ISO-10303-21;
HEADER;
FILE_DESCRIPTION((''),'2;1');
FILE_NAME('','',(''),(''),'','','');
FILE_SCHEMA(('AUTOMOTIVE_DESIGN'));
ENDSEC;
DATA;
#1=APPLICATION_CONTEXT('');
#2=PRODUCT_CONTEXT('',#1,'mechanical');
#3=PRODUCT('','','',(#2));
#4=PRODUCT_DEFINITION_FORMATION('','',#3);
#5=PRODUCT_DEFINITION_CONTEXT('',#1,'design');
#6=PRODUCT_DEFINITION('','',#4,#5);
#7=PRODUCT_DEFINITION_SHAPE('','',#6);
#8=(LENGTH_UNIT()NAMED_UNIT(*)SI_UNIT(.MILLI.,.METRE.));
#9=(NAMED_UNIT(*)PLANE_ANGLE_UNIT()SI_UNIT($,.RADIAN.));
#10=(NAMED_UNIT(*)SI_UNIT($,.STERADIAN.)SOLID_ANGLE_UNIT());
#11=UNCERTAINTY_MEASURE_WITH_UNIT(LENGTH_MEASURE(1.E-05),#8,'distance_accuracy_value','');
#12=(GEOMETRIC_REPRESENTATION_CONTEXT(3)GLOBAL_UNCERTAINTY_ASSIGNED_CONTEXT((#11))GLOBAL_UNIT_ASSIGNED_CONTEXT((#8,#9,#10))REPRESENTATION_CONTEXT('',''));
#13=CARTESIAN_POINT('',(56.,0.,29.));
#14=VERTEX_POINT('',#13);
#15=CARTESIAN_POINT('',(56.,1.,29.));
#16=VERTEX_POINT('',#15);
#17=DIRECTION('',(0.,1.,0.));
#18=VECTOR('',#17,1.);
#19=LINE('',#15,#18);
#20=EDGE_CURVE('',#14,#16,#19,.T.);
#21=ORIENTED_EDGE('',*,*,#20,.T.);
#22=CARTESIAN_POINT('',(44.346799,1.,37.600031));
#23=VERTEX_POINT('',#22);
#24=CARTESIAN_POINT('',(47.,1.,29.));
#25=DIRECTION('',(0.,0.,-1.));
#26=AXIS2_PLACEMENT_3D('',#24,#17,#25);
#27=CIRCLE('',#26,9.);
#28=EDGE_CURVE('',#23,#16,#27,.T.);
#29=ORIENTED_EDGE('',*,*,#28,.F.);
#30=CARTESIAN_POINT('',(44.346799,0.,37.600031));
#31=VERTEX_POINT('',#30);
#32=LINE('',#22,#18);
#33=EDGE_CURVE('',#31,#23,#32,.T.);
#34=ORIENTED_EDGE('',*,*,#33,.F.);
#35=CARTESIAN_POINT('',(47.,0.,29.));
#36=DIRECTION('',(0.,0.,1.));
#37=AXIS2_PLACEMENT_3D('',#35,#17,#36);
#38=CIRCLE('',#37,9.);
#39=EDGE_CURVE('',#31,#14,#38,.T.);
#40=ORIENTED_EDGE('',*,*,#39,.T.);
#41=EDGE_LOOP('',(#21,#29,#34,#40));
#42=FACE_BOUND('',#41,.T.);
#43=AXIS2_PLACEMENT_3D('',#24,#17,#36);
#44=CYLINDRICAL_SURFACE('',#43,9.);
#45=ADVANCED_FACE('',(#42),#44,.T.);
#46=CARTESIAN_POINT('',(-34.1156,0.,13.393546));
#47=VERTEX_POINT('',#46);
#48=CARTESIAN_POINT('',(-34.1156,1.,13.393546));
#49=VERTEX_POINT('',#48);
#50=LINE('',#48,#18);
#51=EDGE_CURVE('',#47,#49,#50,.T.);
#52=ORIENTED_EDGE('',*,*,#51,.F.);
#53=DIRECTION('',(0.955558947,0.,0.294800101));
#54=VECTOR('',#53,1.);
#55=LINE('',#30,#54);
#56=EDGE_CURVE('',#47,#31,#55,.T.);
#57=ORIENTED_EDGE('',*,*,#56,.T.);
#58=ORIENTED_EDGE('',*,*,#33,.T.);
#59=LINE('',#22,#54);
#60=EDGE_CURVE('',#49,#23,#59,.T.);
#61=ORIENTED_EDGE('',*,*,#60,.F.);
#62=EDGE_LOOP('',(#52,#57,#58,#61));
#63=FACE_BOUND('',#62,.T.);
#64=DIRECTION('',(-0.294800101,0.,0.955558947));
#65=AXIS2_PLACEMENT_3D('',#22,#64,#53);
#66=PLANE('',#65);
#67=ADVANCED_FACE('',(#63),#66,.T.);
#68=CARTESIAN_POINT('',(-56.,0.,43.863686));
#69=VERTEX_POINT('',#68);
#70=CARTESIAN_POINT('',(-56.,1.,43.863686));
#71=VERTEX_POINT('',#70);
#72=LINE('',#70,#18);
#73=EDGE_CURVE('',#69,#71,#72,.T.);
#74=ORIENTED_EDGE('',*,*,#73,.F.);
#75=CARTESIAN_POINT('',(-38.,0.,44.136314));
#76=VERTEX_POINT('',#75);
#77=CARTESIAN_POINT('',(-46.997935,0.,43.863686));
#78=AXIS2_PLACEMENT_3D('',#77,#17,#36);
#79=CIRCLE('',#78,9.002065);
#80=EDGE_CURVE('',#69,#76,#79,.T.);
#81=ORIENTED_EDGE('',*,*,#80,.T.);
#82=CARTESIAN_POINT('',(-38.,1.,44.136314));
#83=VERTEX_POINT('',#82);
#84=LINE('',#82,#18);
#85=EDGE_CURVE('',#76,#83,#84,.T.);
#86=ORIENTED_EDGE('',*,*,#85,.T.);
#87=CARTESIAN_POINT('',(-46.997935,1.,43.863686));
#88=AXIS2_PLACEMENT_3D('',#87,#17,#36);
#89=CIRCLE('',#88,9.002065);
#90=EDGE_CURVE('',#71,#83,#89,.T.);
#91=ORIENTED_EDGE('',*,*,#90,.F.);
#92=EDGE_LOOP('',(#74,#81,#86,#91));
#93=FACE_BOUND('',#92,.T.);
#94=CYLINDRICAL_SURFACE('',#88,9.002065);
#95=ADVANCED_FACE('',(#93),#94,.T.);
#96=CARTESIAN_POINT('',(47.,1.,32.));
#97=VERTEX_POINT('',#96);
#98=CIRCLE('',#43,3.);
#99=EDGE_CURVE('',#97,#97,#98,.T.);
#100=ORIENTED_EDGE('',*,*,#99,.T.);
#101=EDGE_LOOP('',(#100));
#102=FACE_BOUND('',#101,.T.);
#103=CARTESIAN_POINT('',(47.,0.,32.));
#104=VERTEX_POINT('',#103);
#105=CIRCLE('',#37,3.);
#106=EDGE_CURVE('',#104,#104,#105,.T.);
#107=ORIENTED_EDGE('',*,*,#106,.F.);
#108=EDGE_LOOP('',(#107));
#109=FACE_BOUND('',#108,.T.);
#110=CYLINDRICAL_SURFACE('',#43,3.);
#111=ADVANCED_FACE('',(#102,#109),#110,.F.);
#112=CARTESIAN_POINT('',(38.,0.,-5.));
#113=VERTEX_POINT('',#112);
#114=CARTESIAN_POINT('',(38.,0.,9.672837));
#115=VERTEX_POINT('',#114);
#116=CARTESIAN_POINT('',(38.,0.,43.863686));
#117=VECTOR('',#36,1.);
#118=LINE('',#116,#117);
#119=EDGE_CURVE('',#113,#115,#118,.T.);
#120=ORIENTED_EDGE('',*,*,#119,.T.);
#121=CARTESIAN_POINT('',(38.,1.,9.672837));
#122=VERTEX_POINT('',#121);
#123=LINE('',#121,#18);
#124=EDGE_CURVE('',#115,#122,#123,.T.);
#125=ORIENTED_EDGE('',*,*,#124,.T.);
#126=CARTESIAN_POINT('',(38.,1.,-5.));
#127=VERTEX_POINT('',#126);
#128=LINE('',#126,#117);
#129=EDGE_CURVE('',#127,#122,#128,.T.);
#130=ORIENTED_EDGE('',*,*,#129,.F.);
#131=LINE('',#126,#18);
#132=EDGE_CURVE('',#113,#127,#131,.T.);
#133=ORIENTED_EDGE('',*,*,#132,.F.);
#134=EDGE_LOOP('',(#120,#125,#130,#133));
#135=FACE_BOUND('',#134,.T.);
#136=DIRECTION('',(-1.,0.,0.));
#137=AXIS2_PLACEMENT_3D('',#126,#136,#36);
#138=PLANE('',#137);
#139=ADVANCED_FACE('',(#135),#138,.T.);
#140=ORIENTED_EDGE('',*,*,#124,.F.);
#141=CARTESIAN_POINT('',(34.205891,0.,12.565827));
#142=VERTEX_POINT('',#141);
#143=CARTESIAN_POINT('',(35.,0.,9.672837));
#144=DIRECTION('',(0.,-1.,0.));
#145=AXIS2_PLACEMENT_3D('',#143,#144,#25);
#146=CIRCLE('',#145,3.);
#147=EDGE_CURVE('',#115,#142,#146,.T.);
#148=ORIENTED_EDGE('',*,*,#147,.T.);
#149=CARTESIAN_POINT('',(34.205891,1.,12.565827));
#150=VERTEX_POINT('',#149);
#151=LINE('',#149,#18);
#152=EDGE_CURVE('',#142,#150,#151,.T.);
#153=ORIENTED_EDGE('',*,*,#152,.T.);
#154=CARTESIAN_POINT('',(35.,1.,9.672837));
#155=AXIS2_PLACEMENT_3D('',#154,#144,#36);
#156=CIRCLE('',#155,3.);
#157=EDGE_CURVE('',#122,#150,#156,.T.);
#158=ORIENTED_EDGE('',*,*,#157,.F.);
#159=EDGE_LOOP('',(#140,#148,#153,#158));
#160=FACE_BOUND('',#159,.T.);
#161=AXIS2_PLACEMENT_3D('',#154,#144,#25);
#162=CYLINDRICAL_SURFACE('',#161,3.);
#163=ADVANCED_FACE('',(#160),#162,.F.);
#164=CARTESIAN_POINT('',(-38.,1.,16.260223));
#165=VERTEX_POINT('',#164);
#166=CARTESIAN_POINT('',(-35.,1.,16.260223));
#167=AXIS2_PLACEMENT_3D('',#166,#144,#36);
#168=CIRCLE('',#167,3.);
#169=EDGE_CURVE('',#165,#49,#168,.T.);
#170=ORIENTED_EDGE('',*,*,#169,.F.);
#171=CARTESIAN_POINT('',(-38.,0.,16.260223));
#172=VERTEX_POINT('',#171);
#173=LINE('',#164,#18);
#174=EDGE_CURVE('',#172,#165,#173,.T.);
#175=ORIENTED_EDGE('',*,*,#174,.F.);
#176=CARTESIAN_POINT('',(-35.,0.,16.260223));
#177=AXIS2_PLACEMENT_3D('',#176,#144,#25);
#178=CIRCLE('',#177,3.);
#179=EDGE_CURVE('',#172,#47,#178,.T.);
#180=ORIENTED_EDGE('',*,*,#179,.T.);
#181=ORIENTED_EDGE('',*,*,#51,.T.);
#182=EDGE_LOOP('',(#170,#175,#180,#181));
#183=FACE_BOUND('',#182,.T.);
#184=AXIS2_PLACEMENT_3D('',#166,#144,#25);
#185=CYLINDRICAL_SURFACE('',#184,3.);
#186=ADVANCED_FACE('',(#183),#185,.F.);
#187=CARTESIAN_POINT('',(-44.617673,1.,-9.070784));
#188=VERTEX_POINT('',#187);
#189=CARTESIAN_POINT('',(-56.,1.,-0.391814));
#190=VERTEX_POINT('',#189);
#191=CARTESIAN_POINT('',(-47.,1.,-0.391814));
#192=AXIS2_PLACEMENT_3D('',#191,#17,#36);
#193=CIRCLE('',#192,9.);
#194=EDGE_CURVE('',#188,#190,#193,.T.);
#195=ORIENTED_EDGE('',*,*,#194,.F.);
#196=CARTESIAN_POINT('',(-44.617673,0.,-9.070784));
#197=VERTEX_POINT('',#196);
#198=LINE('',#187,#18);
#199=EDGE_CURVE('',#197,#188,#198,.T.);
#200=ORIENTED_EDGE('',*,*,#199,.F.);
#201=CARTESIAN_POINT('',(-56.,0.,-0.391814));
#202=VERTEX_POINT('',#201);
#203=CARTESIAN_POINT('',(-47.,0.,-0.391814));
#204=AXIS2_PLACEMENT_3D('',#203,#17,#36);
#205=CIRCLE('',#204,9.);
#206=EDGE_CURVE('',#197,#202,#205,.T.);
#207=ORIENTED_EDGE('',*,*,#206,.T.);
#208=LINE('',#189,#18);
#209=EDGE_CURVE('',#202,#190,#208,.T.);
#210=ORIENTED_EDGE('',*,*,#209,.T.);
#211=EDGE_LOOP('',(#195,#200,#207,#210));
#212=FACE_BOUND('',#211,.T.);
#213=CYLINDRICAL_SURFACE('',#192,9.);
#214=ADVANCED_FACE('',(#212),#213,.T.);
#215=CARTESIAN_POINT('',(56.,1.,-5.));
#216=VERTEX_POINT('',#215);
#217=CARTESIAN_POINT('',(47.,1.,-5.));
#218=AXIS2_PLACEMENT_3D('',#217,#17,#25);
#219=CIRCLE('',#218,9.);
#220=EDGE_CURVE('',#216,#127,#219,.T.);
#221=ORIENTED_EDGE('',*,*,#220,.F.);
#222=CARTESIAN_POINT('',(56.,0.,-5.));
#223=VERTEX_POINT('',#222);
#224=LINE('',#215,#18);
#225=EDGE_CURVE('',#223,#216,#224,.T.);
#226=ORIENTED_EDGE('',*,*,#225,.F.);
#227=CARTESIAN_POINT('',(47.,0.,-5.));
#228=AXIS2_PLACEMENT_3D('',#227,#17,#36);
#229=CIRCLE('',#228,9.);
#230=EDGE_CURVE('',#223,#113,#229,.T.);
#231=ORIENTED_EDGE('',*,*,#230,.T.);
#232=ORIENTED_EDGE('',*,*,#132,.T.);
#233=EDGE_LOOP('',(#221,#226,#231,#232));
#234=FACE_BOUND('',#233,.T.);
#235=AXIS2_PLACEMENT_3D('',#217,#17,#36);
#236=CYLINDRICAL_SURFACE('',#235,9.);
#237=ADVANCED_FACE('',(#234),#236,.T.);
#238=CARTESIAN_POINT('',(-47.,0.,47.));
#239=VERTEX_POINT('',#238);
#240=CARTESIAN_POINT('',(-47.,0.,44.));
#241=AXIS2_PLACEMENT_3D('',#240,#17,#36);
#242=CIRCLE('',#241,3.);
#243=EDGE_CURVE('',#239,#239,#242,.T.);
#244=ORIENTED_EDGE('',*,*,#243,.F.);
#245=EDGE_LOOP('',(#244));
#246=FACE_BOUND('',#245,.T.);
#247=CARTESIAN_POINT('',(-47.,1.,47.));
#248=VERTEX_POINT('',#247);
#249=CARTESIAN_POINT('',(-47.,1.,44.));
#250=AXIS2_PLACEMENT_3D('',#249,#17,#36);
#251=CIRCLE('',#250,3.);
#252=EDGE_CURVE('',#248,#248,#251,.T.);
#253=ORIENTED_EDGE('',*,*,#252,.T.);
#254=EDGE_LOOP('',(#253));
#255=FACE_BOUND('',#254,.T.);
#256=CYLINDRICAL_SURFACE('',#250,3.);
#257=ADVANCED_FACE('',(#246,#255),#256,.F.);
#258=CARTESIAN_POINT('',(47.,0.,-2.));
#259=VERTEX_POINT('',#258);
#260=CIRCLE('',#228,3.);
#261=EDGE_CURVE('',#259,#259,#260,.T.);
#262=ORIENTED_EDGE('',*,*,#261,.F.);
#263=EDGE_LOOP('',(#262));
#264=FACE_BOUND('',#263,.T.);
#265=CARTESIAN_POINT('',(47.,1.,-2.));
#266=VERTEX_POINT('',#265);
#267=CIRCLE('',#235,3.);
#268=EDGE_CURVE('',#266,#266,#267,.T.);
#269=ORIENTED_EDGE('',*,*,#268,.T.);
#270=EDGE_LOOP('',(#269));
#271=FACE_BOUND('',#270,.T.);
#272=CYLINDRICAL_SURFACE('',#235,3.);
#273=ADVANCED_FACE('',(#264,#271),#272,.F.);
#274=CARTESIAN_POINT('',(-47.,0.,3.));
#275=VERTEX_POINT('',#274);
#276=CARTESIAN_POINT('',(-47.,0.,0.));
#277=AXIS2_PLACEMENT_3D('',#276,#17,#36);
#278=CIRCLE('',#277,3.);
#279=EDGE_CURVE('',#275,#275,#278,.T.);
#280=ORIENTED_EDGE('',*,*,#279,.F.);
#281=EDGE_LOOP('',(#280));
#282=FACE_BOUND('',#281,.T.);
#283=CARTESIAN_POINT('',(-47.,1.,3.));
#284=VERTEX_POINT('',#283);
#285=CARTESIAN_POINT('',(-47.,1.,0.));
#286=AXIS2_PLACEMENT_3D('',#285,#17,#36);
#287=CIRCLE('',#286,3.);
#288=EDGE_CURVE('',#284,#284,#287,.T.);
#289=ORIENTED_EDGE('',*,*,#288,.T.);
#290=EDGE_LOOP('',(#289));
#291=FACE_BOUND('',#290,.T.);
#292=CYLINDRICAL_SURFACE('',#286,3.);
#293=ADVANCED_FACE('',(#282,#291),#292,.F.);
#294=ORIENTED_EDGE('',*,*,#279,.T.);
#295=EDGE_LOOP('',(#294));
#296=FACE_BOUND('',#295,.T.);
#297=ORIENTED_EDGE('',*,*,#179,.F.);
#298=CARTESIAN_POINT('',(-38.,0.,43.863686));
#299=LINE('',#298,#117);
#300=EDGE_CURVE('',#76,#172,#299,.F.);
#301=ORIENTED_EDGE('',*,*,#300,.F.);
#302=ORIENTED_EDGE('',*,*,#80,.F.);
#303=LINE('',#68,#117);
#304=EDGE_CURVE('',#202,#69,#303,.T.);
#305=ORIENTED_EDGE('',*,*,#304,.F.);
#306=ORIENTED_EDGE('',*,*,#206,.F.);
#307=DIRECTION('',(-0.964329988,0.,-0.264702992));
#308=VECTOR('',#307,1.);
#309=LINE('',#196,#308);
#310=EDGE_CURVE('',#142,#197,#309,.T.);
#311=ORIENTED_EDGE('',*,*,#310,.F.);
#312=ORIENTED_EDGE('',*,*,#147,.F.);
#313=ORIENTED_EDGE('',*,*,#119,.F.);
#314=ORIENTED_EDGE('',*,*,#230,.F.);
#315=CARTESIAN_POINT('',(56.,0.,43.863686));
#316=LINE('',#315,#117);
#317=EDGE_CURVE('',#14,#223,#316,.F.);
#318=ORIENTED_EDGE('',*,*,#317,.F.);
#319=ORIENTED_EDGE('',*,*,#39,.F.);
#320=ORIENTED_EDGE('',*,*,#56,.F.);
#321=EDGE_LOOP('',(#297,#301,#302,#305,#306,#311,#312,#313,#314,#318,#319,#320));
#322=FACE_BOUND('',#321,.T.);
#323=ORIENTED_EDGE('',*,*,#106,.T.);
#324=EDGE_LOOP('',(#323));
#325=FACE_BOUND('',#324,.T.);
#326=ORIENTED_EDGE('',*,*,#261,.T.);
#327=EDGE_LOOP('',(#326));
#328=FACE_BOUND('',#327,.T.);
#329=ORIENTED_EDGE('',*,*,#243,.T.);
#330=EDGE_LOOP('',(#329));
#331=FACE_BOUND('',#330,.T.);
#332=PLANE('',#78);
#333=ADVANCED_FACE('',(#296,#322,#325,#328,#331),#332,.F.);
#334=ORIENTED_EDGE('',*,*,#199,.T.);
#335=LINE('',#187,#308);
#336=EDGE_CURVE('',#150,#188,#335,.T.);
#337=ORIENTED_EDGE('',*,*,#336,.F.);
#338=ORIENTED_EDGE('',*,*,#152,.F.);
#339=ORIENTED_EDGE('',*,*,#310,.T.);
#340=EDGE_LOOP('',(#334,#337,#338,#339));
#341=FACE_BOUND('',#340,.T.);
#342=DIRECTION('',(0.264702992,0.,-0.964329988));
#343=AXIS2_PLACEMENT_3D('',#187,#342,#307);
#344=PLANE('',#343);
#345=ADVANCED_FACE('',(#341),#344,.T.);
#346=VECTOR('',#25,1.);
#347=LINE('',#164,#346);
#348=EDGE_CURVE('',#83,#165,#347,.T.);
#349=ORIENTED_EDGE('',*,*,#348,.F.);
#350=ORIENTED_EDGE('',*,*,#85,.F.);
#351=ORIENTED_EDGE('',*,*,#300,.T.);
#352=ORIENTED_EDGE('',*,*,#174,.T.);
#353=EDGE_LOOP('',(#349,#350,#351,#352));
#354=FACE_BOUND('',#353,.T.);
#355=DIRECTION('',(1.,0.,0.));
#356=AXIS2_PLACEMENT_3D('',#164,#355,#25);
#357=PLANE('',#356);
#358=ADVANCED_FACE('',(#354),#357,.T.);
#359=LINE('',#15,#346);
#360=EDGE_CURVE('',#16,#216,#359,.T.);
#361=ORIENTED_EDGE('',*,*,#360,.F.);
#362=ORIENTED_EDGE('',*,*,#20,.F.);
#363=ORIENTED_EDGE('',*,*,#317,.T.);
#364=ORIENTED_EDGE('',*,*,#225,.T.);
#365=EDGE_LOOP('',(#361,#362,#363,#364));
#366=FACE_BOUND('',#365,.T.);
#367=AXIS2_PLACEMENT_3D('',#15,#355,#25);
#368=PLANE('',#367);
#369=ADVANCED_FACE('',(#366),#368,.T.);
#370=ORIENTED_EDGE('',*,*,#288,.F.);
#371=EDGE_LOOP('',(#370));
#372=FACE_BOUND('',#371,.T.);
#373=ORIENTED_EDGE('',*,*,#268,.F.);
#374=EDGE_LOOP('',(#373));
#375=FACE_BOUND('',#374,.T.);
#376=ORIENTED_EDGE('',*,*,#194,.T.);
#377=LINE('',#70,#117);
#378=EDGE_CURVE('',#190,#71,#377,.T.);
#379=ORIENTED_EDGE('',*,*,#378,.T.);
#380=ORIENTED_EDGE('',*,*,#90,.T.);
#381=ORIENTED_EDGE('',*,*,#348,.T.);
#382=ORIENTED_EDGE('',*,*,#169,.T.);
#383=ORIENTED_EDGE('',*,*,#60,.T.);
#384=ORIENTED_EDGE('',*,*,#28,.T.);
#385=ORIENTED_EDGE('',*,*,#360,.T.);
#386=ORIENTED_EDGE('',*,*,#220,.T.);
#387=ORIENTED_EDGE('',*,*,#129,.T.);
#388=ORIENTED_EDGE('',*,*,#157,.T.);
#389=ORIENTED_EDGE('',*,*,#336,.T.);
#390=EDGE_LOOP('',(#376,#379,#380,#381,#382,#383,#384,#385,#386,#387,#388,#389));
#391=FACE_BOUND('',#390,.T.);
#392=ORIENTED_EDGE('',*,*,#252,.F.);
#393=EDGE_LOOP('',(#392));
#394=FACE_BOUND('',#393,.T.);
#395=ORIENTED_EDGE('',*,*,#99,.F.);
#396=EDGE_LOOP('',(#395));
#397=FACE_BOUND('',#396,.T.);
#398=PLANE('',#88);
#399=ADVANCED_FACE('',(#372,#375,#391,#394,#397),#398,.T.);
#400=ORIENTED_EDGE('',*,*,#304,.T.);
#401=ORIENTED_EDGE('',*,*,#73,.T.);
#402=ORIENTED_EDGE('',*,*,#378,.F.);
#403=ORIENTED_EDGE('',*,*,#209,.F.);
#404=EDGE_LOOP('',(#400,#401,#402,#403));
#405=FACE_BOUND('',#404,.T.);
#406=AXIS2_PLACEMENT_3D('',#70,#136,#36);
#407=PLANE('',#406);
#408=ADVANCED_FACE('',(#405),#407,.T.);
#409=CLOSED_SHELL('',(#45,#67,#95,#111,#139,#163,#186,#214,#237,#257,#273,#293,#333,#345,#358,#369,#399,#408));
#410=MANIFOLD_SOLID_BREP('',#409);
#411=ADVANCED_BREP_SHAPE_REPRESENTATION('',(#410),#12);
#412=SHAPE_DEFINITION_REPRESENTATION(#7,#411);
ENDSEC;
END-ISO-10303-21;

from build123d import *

# Parameters (mm, degrees)
SKETCH1_R           = 3
BOSS_EXTRUDE2_DEPTH = 1


with BuildPart() as part:
    # Sketch1 → Boss-Extrude2 (new body)
    with BuildSketch(Plane(origin=(0, 0, 0), x_dir=(1, 0, 0), z_dir=(0, 1, 0))):
        with BuildLine():
            Line((-56, -43.863685539), (-56, 0.391814312))
            ThreePointArc((-56, 0.391814312), (-52.457062288, 7.548662164), (-44.617673071, 9.070784204))
            Line((-44.617673071, 9.070784204), (34.205891024, -12.565827248))
            ThreePointArc((34.205891024, -12.565827248), (36.819020763, -12.058453234), (38, -9.672837283))
            Line((38, -9.672837283), (38, 5))
            ThreePointArc((38, 5), (47, 14), (56, 5))
            Line((56, 5), (56, -29))
            ThreePointArc((56, -29), (52.344211441, -36.24150565), (44.346799095, -37.600030521))
            Line((44.346799095, -37.600030521), (-34.115599698, -13.393545787))
            ThreePointArc((-34.115599698, -13.393545787), (-36.781403814, -13.84638741), (-38, -16.260222627))
            Line((-38, -16.260222627), (-38, -44.136314461))
            ThreePointArc((-38, -44.136314461), (-47.13426547, -52.864717793), (-56, -43.863685539))
        make_face()
        with Locations(Location((-47, 0, 0), (0, 0, 270))):
            Circle(SKETCH1_R, mode=Mode.SUBTRACT)
        with Locations(Location((47, -29, 0), (0, 0, 270))):
            Circle(SKETCH1_R, mode=Mode.SUBTRACT)
        with Locations(Location((-47, -44, 0), (0, 0, 270))):
            Circle(SKETCH1_R, mode=Mode.SUBTRACT)
        with Locations(Location((47, 5, 0), (0, 0, 270))):
            Circle(SKETCH1_R, mode=Mode.SUBTRACT)
    extrude(amount=BOSS_EXTRUDE2_DEPTH)


solid = part.part
